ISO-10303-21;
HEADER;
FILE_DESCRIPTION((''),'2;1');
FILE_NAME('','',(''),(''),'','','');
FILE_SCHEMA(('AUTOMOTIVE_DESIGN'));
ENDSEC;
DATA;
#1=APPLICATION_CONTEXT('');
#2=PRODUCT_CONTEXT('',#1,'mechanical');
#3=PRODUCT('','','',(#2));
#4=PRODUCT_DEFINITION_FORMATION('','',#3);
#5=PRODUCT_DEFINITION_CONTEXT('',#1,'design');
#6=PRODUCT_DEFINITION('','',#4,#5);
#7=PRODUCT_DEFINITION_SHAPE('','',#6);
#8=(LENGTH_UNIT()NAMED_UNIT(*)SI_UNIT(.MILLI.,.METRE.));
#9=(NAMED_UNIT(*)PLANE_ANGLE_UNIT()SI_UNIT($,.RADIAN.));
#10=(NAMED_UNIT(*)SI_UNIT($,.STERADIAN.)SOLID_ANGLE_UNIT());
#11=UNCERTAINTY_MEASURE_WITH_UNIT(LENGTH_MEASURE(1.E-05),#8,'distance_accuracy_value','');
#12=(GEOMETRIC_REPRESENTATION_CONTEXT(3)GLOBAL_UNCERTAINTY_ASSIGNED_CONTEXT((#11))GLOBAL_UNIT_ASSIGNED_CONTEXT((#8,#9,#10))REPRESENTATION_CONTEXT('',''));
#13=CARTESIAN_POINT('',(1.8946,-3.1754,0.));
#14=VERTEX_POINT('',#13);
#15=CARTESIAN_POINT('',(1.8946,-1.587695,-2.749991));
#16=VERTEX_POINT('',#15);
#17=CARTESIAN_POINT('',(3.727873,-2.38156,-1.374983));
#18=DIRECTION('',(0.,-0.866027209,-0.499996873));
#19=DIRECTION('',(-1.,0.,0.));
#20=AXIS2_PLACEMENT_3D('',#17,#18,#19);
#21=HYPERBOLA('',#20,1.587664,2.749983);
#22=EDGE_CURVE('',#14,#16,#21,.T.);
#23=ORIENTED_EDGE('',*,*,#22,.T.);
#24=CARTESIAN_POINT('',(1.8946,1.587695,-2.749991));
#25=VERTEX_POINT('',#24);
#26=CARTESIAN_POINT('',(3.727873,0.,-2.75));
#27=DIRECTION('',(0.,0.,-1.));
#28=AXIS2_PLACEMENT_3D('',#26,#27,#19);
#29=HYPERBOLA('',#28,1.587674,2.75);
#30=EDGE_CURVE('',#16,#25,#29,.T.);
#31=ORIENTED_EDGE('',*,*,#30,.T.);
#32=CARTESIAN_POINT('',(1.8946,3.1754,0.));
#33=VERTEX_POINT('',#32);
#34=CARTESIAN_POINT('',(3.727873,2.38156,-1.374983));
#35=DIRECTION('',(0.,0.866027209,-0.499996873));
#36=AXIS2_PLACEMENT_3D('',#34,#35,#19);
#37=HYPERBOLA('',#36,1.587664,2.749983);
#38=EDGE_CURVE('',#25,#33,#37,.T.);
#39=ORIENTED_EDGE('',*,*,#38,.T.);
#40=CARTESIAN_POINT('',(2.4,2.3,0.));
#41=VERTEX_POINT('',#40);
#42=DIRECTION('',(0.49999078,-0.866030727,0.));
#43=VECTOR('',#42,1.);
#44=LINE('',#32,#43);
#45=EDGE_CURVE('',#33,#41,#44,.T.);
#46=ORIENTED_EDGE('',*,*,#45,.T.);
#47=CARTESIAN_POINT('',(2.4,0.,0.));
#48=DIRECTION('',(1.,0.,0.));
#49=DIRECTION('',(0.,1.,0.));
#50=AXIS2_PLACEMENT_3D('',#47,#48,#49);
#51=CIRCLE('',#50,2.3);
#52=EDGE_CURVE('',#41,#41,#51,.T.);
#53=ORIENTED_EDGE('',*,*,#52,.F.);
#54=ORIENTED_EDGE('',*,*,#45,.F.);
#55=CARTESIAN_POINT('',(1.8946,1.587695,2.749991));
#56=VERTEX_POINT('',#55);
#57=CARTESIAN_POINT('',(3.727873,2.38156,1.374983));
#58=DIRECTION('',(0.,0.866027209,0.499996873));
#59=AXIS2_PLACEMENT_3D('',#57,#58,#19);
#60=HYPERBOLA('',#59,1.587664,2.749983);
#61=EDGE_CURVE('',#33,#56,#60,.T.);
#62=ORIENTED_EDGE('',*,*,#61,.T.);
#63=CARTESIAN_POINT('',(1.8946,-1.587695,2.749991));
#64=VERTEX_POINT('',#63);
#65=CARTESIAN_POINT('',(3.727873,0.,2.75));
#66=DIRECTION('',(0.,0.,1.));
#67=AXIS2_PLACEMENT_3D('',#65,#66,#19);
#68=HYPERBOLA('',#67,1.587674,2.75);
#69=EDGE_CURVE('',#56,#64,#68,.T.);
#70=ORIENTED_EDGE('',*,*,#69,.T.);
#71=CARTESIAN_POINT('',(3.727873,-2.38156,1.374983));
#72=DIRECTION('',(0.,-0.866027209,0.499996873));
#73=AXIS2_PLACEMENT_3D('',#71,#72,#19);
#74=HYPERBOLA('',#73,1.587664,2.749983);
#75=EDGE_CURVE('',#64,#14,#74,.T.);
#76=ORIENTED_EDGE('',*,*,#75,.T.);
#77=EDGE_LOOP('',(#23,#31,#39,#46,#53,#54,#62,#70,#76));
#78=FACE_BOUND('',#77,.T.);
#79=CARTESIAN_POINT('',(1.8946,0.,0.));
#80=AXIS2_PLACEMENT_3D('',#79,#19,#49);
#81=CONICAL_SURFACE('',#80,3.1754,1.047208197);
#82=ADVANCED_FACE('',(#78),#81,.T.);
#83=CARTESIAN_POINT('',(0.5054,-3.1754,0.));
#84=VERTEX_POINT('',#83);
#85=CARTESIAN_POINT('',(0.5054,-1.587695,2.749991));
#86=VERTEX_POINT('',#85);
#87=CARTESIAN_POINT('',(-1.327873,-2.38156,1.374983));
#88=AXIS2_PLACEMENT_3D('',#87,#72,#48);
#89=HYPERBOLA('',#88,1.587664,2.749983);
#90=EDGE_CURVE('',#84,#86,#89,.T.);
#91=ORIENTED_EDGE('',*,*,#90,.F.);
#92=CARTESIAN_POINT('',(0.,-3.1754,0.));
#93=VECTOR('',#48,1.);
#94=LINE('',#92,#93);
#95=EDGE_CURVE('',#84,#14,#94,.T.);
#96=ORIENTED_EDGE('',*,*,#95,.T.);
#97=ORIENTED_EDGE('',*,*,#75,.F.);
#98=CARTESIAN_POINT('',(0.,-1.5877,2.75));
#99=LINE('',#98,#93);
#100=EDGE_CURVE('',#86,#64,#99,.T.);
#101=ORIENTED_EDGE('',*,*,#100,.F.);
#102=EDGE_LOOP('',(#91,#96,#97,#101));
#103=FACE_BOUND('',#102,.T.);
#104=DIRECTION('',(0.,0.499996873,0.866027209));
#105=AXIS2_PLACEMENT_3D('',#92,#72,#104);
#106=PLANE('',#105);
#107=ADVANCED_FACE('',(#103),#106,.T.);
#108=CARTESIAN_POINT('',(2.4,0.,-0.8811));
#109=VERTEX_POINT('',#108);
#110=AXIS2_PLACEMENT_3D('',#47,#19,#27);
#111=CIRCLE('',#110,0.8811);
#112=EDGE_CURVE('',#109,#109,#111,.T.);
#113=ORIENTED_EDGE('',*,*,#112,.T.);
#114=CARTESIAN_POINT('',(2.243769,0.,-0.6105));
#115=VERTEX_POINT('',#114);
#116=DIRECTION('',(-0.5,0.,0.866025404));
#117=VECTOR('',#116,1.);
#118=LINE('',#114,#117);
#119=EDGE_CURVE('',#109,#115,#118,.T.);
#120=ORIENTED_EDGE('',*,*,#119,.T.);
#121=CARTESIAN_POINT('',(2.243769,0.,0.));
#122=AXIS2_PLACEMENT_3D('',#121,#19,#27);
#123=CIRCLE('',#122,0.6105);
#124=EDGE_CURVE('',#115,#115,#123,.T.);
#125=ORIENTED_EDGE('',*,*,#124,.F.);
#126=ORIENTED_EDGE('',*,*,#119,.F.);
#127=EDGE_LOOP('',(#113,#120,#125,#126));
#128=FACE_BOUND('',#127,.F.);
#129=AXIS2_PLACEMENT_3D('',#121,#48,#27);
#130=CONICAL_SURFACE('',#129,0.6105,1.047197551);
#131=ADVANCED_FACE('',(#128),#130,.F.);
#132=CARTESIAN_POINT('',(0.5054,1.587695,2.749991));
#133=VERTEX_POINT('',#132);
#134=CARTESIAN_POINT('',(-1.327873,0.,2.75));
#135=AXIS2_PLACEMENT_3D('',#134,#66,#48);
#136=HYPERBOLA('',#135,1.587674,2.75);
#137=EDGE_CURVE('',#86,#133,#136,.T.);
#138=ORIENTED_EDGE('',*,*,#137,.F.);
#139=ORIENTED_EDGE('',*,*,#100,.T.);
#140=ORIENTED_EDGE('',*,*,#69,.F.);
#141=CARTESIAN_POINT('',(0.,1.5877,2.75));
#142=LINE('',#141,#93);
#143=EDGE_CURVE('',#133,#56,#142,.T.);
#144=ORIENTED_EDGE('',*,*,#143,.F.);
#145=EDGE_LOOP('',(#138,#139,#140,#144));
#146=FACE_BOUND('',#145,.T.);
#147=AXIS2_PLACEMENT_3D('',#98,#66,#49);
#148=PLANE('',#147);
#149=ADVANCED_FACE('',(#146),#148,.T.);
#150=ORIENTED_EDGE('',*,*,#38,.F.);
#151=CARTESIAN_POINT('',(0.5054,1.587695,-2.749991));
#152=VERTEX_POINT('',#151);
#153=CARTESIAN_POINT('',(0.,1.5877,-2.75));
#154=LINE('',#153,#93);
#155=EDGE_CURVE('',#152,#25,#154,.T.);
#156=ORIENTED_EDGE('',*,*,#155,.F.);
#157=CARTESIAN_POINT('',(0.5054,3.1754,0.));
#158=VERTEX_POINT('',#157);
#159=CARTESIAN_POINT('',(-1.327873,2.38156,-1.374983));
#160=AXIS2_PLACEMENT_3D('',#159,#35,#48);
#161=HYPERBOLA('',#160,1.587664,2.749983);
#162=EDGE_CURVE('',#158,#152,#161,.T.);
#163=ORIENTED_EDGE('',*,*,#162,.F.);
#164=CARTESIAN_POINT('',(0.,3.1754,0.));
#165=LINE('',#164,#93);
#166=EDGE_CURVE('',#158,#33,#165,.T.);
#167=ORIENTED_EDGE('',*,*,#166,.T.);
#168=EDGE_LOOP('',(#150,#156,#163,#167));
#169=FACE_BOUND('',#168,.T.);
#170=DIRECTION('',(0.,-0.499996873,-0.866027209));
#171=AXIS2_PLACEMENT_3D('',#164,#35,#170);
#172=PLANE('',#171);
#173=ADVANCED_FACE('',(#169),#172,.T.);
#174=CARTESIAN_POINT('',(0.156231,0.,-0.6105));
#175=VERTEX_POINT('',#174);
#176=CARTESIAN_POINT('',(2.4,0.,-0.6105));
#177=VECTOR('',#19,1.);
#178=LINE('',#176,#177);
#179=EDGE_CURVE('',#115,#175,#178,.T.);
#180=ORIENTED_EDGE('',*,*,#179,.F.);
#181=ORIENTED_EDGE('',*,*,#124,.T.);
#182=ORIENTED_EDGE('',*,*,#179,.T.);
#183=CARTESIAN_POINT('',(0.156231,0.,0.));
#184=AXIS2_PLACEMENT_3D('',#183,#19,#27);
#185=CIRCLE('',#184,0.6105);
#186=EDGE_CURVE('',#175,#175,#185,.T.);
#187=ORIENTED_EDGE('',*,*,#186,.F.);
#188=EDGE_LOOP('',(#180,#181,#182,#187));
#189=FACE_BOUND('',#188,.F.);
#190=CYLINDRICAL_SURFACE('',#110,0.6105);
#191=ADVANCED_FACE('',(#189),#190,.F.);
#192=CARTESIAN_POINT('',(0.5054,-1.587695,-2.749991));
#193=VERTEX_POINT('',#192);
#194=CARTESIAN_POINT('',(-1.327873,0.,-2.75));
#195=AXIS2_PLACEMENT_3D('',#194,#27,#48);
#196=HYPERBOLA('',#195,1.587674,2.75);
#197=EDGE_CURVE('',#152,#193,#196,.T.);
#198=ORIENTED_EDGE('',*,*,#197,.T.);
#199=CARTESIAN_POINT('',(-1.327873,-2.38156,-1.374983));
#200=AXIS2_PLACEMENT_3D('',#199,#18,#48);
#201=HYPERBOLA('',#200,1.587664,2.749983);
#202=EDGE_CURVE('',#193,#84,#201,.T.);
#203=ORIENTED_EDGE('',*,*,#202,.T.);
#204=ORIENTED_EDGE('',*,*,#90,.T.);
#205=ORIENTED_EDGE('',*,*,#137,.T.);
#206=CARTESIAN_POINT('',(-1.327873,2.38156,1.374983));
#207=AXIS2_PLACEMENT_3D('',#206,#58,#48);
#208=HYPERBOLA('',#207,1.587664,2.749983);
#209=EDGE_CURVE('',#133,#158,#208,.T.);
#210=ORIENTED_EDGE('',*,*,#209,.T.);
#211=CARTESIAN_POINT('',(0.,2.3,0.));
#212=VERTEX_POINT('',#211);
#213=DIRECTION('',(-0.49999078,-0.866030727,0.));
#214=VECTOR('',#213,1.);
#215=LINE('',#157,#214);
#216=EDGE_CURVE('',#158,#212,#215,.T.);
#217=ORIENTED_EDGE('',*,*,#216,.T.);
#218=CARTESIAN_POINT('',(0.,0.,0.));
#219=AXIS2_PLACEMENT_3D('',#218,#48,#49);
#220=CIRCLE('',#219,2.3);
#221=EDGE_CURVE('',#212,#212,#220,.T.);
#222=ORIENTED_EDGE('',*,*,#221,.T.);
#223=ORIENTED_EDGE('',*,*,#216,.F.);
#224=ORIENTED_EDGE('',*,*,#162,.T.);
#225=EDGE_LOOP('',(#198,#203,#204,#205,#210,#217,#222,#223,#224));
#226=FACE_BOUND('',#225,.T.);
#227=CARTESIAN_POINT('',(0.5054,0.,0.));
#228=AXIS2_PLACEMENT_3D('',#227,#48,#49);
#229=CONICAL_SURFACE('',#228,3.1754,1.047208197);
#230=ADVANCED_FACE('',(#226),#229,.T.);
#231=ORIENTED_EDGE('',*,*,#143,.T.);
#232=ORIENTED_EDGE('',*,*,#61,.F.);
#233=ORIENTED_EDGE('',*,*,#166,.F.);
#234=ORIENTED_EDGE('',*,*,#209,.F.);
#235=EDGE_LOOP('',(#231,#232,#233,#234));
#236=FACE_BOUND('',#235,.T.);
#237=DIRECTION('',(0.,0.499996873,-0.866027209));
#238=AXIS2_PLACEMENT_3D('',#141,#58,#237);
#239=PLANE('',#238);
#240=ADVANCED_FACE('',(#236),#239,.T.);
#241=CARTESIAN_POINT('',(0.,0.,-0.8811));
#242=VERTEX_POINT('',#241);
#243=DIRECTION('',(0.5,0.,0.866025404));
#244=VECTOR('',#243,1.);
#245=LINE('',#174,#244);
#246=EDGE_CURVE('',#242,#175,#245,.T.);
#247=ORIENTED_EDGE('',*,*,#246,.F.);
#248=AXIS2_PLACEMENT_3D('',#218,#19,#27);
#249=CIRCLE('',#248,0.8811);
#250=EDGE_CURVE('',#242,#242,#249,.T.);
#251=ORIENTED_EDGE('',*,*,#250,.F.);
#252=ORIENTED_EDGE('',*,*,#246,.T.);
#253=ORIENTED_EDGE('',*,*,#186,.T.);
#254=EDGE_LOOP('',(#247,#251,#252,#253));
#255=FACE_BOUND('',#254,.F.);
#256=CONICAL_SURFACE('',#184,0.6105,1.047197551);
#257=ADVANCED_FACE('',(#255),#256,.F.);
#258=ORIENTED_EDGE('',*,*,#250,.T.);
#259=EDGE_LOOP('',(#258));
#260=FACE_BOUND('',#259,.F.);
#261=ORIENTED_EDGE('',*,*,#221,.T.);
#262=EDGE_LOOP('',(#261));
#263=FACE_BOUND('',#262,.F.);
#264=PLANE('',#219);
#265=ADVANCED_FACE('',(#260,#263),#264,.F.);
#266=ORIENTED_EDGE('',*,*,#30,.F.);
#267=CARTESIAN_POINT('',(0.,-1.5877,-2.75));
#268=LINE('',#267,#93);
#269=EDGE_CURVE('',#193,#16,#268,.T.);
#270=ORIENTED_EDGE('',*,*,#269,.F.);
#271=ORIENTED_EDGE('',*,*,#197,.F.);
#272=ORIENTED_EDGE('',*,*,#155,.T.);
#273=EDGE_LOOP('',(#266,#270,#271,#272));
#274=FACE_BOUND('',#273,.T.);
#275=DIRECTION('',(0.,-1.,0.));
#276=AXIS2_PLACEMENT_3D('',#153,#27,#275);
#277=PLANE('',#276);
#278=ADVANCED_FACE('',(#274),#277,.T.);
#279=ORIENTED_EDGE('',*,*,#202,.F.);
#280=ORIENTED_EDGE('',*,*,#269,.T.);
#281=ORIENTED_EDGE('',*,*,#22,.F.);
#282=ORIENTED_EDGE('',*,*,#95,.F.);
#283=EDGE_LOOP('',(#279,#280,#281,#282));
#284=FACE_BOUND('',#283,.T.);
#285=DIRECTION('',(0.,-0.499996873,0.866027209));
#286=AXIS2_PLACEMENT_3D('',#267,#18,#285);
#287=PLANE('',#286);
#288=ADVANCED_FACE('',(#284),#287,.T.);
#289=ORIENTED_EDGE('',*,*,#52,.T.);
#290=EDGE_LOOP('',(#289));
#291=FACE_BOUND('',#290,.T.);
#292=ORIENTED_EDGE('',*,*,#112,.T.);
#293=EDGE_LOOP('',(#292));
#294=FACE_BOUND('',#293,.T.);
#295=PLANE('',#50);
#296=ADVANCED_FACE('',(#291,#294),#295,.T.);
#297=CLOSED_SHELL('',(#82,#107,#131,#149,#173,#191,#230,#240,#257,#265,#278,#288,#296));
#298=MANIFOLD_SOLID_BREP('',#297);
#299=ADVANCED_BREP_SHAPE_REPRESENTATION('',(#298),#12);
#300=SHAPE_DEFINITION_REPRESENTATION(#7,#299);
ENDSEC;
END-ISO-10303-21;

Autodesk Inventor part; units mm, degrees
ref_plane "YZ Plane" through (0, 0, 0) normal (1, 0, 0) x (0, 1, 0)
ref_plane "XZ Plane" through (0, 0, 0) normal (0, 1, 0) x (-1, 0, 0)
sketch "Sketch1" plane through (0, 0, 0) normal (1, 0, 0) x (0, 1, 0)
  line L0 (-3.1754, 0) -> (-1.5877, 2.75)
  line L1 (-1.5877, 2.75) -> (1.5877, 2.75)
  line L2 (1.5877, 2.75) -> (3.1754, 0)
  line L3 (3.1754, 0) -> (1.5877, -2.75)
  line L4 (1.5877, -2.75) -> (-1.5877, -2.75)
  line L5 (-1.5877, -2.75) -> (-3.1754, 0)
  point P0 (0, 0)
  point P1 (0, 0)
  dimension "d0" = 6.3509
extrude "Body" add sketch "Sketch1" along normal blind 2.4
sketch "Sketch2" plane through (0, 0, 0) normal (0, 0, 1) x (1, 0, 0)
  line L0 (0, 1.5877) -> (0, 3.1754) projected
  line L1 (0, 3.1754) -> (2.4, 3.1754) projected
  line L2 (2.4, 1.5877) -> (2.4, 3.1754) projected
  line L3 (-0.16, 0) -> (0.96, 0) projected
  line L4 (0.5054, 3.1754) -> (0, 2.3)
  line L5 (1.8946, 3.1754) -> (2.4, 2.3)
  dimension "d3" = 30
  dimension "d4" = 30
  dimension "d5" = 4.6
  dimension "d6" = 4.6
revolve "Chamfer1" cut sketch "Sketch2" angle 360 about axis through (-10, 0, 0) along (1, 0, 0)
sketch "Sketch3" plane through (2.4, 0, 0) normal (1, 0, 0) x (0, 0, -1)
  arc A0 (-0.625, -1.0825) -> (0.625, -1.0825) centre (0, 0) ccw projected
hole "Thread" at (2.4, 0, 0) direction (-1, 0, 0) diameter 1.221 end through all thread size "M1.6x0.35" class "6H" standard "ANSI Metric M Profile"
chamfer "Chamfer2" distance 0.2706 angle 30 1 edges at (2.4, 0, 0.6105) measured on face at (2.4, 1.7131, -0.208)
chamfer "Chamfer3" distance 0.2706 angle 30 1 edges at (0, 0, 0.6105) measured on face at (0, 1.7131, -0.208)
ref_plane "Work Plane1" through (-6.3375, 0, 0) normal (0, -0.8660254, -0.5) x (1, 0, 0)
equation "\"d0\" = 1.1547 * SW"
equation "\"d1\" = KOH"
equation "\"d3\" = ANG1"
equation "\"d4\" = ANG2"
equation "\"d5\" = SW0"
equation "\"d6\" = SW01"
equation "\"d8\" = -0.5 * GD1 + 0.5 * NND"
equation "\"d40\" = -0.5 * GD1 + 0.5 * NND"
equation "\"d10\" = -0.5 * GD1 + 0.5 * NND"
equation "\"d41\" = -0.5 * GD1 + 0.5 * NND"
equation "\"ANG1\" = 30deg"
equation "\"ANG2\" = 30deg"
equation "\"NND\" = 3"
equation "\"KOH\" = 2.4"
equation "\"SW\" = 5.5"
equation "\"SW0\" = 4.6"
equation "\"SW01\" = 4.6"
equation "\"GUL\" = 0.541266 * PTC"
equation "\"THREADDIA\" = 3"
equation "\"TOA\" = 30deg"
equation "\"PTC\" = 0.5"
equation "\"E0\" = 1.155 * SW"
equation "\"GAL\" = 0.541266 * PTC"
equation "\"GD1\" = 2.458734"
properties part number "DIN 555-5 - M3" material "Steel, Mild"
